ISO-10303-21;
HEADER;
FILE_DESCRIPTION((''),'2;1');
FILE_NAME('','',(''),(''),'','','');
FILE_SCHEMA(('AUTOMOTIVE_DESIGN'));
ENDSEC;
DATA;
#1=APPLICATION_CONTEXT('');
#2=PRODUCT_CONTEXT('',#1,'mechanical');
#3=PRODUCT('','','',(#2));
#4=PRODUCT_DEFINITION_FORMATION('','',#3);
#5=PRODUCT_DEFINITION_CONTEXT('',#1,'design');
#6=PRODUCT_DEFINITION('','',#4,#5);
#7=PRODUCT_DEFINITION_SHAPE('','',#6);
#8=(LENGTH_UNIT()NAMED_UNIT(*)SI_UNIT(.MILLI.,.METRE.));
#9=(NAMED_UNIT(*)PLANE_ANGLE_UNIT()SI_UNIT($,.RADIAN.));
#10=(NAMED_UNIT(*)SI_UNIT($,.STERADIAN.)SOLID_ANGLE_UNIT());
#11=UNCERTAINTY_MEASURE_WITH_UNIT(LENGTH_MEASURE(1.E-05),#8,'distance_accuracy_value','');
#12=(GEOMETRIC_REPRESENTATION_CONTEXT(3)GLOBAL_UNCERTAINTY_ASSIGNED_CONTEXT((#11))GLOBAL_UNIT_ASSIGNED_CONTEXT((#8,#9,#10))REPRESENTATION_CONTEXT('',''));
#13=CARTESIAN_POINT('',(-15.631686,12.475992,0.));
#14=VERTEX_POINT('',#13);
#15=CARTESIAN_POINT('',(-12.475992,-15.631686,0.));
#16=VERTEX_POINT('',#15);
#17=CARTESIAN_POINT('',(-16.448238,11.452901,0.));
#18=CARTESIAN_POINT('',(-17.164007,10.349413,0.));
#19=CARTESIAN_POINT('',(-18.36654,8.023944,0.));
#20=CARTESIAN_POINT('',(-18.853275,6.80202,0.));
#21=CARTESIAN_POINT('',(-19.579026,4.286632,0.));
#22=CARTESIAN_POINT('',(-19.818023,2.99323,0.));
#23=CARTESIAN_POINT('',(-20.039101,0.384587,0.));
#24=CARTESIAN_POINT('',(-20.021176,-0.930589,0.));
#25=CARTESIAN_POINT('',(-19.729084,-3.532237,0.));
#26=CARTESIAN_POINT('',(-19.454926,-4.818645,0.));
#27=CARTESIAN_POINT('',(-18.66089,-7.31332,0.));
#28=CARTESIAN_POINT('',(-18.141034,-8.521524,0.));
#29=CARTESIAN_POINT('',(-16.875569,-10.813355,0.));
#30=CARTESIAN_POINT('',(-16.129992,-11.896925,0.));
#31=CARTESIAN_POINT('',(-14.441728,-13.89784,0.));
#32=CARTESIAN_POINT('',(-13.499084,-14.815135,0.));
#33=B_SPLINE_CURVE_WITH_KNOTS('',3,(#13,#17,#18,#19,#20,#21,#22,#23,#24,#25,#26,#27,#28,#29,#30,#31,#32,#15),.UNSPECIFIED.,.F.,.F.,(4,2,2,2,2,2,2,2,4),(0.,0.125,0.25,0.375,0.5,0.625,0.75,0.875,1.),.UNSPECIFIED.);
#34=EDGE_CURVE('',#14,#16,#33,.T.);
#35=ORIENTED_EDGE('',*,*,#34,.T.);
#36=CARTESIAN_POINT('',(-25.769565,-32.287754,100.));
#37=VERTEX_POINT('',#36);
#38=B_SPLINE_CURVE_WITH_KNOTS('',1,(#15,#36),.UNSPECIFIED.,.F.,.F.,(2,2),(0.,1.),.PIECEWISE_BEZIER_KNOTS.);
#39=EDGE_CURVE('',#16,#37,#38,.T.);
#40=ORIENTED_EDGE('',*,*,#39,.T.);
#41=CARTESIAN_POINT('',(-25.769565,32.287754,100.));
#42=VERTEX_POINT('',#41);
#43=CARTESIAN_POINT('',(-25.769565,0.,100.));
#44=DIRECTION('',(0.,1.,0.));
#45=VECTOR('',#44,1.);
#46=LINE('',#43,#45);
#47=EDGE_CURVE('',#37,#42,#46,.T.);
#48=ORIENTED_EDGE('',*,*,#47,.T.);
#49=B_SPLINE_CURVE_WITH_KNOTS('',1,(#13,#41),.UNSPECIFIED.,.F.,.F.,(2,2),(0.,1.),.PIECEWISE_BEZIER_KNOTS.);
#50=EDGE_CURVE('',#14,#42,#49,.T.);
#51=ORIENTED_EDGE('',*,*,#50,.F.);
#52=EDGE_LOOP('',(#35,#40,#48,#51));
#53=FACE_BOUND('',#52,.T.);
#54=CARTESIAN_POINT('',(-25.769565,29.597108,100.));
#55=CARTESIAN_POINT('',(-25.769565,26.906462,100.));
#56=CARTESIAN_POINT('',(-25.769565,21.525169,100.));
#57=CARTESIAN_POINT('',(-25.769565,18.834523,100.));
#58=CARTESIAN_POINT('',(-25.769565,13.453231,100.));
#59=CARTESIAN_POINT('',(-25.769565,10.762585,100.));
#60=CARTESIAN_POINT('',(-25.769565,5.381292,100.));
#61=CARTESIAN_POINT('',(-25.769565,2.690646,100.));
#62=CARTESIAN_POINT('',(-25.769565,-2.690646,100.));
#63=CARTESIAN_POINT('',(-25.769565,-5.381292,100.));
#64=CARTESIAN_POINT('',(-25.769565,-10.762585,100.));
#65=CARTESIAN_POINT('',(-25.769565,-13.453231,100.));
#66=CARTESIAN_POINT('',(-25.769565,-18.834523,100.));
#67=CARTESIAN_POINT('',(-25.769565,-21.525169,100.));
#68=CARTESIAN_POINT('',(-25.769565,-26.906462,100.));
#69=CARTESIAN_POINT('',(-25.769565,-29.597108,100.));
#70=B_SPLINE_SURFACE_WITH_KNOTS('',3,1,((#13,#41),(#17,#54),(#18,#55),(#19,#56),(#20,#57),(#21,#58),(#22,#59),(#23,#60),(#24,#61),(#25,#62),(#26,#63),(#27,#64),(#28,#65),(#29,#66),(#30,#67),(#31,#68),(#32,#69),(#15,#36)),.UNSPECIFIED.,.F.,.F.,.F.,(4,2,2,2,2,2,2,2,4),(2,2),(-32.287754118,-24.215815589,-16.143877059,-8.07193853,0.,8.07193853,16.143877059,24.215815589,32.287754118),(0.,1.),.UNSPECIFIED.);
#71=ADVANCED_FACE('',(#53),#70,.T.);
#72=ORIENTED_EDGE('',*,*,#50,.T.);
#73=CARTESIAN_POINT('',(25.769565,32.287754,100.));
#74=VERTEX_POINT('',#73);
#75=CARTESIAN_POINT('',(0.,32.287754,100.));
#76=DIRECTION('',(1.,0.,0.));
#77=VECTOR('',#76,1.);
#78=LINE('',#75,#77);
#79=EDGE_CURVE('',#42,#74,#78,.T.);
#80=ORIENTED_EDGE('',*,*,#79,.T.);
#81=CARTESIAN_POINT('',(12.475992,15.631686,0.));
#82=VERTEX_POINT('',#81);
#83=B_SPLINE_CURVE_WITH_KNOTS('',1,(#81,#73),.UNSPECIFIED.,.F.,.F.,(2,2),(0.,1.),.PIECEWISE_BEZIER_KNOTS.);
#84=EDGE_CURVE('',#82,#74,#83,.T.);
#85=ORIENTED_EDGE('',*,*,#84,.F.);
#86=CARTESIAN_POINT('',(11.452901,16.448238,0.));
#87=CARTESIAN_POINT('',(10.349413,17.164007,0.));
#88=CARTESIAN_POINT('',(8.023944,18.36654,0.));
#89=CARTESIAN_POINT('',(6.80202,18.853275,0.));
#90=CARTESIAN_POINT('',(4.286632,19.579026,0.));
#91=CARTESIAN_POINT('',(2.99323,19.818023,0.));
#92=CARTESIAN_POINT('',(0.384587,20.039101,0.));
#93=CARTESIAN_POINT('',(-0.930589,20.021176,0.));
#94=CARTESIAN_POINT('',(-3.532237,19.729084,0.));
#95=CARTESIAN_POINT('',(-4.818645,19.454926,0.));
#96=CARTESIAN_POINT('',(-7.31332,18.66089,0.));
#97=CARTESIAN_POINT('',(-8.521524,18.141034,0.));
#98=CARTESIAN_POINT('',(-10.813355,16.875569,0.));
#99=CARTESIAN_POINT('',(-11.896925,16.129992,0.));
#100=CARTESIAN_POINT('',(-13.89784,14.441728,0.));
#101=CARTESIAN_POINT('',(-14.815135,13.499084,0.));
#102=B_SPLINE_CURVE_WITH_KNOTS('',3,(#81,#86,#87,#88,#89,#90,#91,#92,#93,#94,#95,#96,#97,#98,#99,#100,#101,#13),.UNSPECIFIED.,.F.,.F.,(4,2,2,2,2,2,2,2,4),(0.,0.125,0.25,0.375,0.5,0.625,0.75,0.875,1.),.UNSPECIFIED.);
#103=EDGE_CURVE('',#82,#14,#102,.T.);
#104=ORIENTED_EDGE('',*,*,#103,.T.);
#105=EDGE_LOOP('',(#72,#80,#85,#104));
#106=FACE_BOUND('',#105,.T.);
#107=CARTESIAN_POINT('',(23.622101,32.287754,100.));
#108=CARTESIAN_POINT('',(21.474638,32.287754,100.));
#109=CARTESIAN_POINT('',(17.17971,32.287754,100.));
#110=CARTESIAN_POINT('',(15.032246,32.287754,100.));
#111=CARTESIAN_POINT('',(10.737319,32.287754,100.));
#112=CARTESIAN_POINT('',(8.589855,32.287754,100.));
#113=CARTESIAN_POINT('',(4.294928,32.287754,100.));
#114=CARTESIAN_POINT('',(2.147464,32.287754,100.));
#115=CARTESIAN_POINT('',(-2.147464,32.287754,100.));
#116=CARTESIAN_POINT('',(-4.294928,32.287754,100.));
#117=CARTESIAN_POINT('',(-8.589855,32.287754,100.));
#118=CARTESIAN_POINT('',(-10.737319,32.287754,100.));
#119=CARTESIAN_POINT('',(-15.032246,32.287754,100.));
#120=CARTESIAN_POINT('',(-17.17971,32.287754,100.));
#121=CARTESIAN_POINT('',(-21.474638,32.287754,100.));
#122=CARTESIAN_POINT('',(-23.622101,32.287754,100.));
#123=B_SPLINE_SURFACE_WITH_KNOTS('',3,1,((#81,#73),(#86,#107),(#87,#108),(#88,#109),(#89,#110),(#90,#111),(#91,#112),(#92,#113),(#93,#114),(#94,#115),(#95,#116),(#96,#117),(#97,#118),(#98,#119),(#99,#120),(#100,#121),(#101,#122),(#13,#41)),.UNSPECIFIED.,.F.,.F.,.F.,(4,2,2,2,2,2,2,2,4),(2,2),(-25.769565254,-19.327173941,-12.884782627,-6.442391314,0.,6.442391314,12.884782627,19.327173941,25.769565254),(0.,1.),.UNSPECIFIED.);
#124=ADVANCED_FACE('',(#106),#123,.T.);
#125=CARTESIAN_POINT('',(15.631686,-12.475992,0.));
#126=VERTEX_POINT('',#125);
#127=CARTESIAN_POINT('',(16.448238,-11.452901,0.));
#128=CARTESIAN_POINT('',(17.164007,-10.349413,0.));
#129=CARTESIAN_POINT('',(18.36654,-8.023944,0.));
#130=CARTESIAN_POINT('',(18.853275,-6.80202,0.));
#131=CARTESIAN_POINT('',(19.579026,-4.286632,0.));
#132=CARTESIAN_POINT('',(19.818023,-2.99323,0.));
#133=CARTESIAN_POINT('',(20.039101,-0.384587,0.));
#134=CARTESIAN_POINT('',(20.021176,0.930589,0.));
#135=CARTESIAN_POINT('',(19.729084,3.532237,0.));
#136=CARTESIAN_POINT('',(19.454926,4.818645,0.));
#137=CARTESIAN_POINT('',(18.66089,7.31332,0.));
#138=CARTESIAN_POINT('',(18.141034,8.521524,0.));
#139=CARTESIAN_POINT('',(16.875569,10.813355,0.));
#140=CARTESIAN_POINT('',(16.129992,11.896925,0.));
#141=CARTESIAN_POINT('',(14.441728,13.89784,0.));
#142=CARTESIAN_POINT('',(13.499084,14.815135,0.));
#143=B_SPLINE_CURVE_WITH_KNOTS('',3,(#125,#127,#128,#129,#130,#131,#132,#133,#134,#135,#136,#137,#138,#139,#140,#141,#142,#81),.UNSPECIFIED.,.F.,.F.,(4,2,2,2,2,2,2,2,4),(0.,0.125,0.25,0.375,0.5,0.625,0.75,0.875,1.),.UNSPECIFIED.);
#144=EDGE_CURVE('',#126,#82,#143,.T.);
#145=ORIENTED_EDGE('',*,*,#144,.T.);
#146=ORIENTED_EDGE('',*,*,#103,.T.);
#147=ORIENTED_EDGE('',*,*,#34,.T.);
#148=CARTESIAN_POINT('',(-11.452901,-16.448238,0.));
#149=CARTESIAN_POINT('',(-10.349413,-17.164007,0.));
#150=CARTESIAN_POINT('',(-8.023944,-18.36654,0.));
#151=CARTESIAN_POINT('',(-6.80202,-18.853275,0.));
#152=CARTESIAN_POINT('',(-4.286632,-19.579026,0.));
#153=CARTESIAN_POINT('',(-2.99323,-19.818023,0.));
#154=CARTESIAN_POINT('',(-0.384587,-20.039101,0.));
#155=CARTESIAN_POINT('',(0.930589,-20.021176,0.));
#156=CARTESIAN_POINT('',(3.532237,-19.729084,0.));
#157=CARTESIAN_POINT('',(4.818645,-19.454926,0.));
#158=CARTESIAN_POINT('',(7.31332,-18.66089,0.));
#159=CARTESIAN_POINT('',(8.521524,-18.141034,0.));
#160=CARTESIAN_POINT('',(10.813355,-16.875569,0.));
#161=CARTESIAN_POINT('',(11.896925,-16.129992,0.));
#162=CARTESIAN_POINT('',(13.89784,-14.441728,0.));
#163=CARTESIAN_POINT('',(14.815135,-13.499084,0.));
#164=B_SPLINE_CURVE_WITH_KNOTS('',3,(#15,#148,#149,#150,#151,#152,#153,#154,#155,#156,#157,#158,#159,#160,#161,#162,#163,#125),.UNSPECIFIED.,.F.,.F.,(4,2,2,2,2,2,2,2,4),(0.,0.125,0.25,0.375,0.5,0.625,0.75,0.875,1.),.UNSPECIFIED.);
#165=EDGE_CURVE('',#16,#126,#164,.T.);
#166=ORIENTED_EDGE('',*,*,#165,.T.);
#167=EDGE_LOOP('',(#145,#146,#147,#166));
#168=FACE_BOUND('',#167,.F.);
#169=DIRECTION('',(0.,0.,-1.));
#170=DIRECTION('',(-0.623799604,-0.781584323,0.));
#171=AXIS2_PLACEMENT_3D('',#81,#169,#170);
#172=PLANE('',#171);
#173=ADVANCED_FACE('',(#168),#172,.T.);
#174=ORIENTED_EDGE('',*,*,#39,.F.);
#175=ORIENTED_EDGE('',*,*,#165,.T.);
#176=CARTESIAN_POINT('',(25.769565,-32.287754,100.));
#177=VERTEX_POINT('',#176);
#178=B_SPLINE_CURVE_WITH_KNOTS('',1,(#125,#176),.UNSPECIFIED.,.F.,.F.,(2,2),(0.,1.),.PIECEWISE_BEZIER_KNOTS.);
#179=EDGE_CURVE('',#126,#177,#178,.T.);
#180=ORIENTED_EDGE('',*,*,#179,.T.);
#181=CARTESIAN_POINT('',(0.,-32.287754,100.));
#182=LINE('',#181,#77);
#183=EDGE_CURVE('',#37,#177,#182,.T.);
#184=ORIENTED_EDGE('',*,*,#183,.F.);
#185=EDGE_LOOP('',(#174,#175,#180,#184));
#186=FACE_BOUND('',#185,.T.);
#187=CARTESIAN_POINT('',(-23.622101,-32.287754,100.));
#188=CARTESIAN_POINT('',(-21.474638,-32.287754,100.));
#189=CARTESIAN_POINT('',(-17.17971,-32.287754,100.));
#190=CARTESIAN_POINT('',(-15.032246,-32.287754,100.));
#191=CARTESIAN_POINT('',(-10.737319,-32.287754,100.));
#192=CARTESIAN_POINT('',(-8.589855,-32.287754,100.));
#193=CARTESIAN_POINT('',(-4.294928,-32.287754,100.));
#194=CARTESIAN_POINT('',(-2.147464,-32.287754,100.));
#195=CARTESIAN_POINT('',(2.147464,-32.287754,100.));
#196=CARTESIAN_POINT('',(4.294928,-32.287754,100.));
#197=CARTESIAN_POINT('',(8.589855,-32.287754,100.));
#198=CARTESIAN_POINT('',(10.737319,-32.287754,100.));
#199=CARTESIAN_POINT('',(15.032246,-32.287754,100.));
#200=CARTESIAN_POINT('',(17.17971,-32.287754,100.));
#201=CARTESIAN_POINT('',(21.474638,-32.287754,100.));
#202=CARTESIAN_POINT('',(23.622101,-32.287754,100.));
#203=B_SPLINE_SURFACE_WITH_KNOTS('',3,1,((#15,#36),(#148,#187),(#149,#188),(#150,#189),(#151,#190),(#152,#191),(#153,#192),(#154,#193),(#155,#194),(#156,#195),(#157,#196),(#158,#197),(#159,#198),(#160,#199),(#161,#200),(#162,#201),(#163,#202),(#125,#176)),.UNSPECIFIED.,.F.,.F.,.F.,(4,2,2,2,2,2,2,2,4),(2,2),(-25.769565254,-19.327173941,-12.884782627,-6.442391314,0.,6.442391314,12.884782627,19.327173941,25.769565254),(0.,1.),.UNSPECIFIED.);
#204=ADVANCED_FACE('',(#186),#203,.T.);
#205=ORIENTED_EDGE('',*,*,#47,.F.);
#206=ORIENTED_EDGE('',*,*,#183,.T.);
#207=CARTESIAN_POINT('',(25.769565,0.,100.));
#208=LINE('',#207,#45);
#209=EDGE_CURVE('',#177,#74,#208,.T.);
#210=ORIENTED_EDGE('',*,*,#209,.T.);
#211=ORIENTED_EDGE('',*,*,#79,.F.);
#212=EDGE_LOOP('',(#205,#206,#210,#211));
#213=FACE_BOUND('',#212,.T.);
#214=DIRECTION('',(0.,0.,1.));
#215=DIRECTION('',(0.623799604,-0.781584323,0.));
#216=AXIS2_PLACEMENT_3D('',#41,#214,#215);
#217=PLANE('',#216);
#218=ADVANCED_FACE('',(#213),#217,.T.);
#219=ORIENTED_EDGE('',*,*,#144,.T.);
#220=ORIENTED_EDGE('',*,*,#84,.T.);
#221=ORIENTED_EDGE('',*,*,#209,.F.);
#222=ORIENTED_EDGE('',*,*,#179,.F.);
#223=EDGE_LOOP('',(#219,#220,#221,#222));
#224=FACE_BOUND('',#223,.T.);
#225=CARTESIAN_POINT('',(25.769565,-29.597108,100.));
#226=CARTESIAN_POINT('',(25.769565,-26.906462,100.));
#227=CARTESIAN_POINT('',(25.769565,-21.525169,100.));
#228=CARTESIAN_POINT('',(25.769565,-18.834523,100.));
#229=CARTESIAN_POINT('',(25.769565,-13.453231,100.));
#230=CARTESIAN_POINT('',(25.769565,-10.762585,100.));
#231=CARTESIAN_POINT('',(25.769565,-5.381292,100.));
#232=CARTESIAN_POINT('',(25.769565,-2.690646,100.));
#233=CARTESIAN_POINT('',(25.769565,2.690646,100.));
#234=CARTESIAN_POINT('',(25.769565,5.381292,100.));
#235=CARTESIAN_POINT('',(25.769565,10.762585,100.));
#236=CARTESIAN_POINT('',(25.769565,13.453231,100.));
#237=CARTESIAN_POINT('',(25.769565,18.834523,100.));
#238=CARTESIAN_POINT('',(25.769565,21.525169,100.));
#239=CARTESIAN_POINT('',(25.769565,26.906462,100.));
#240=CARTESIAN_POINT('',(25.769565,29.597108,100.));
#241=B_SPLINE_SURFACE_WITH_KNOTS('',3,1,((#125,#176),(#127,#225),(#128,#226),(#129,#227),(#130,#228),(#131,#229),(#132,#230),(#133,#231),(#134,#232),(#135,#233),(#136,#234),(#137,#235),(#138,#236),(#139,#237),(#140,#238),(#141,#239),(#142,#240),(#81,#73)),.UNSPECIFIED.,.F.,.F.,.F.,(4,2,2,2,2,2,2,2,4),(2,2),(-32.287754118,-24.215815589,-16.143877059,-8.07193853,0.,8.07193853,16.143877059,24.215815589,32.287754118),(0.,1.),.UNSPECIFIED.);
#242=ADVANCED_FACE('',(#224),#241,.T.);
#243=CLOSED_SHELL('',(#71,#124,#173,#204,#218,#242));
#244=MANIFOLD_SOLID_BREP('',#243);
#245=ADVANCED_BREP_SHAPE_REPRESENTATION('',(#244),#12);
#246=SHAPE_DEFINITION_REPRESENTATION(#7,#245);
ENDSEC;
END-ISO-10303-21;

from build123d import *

# Parameters (mm, degrees)
F2_W = 51.5391305089
F2_H = 64.5755082369


# Not quite as in the source:
# - the arcs of a loft's sections are written as splines that run evenly, so that the points pair up as in the source's solid


with BuildPart() as f3:
    # F0 (on Top) → F3 section 0
    with BuildSketch(Plane.XY):
        with BuildLine():
            add(Edge.make_bspline(
                [(12.4759920731, 15.6316864667), (11.4529005863, 16.4482382384), (10.3494130561, 17.1640065946), (8.0239442184, 18.3665400162), (6.8020204126, 18.8532753465), (4.2866321741, 19.5790259612), (2.9932299393, 19.8180232999), (0.3845872594, 20.0391009186), (-0.930588682, 20.021175732), (-3.5322371281, 19.7290844658), (-4.8186453021, 19.4549256087), (-7.3133196237, 18.6608903611), (-8.5215240856, 18.1410336047), (-10.8133553474, 16.875568705), (-11.8969254774, 16.1299918528), (-13.8978398894, 14.4417284075), (-14.8151346949, 13.4990835599), (-15.6316864667, 12.4759920731)],
                knots=[0, 0, 0, 0, 0.125, 0.125, 0.25, 0.25, 0.375, 0.375, 0.5, 0.5, 0.625, 0.625, 0.75, 0.75, 0.875, 0.875, 1, 1, 1, 1], degree=3))
            add(Edge.make_bspline(
                [(-15.6316864667, 12.4759920731), (-16.4482382384, 11.4529005863), (-17.1640065946, 10.3494130561), (-18.3665400162, 8.0239442184), (-18.8532753465, 6.8020204126), (-19.5790259612, 4.2866321741), (-19.8180232999, 2.9932299393), (-20.0391009186, 0.3845872594), (-20.021175732, -0.930588682), (-19.7290844658, -3.5322371281), (-19.4549256087, -4.8186453021), (-18.6608903611, -7.3133196237), (-18.1410336047, -8.5215240856), (-16.875568705, -10.8133553474), (-16.1299918528, -11.8969254774), (-14.4417284075, -13.8978398894), (-13.4990835599, -14.8151346949), (-12.4759920731, -15.6316864667)],
                knots=[0, 0, 0, 0, 0.125, 0.125, 0.25, 0.25, 0.375, 0.375, 0.5, 0.5, 0.625, 0.625, 0.75, 0.75, 0.875, 0.875, 1, 1, 1, 1], degree=3))
            add(Edge.make_bspline(
                [(-12.4759920731, -15.6316864667), (-11.4529005863, -16.4482382384), (-10.3494130561, -17.1640065946), (-8.0239442184, -18.3665400162), (-6.8020204126, -18.8532753465), (-4.2866321741, -19.5790259612), (-2.9932299393, -19.8180232999), (-0.3845872594, -20.0391009186), (0.930588682, -20.021175732), (3.5322371281, -19.7290844658), (4.8186453021, -19.4549256087), (7.3133196237, -18.6608903611), (8.5215240856, -18.1410336047), (10.8133553474, -16.875568705), (11.8969254774, -16.1299918528), (13.8978398894, -14.4417284075), (14.8151346949, -13.4990835599), (15.6316864667, -12.4759920731)],
                knots=[0, 0, 0, 0, 0.125, 0.125, 0.25, 0.25, 0.375, 0.375, 0.5, 0.5, 0.625, 0.625, 0.75, 0.75, 0.875, 0.875, 1, 1, 1, 1], degree=3))
            add(Edge.make_bspline(
                [(15.6316864667, -12.4759920731), (16.4482382384, -11.4529005863), (17.1640065946, -10.3494130561), (18.3665400162, -8.0239442184), (18.8532753465, -6.8020204126), (19.5790259612, -4.2866321741), (19.8180232999, -2.9932299393), (20.0391009186, -0.3845872594), (20.021175732, 0.930588682), (19.7290844658, 3.5322371281), (19.4549256087, 4.8186453021), (18.6608903611, 7.3133196237), (18.1410336047, 8.5215240856), (16.875568705, 10.8133553474), (16.1299918528, 11.8969254774), (14.4417284075, 13.8978398894), (13.4990835599, 14.8151346949), (12.4759920731, 15.6316864667)],
                knots=[0, 0, 0, 0, 0.125, 0.125, 0.25, 0.25, 0.375, 0.375, 0.5, 0.5, 0.625, 0.625, 0.75, 0.75, 0.875, 0.875, 1, 1, 1, 1], degree=3))
        make_face()
    # F2 (on offset) → F3 section 1
    with BuildSketch(Plane.XY.offset(100)):
        Rectangle(F2_W, F2_H)
    loft(ruled=True)


solid = f3.part
